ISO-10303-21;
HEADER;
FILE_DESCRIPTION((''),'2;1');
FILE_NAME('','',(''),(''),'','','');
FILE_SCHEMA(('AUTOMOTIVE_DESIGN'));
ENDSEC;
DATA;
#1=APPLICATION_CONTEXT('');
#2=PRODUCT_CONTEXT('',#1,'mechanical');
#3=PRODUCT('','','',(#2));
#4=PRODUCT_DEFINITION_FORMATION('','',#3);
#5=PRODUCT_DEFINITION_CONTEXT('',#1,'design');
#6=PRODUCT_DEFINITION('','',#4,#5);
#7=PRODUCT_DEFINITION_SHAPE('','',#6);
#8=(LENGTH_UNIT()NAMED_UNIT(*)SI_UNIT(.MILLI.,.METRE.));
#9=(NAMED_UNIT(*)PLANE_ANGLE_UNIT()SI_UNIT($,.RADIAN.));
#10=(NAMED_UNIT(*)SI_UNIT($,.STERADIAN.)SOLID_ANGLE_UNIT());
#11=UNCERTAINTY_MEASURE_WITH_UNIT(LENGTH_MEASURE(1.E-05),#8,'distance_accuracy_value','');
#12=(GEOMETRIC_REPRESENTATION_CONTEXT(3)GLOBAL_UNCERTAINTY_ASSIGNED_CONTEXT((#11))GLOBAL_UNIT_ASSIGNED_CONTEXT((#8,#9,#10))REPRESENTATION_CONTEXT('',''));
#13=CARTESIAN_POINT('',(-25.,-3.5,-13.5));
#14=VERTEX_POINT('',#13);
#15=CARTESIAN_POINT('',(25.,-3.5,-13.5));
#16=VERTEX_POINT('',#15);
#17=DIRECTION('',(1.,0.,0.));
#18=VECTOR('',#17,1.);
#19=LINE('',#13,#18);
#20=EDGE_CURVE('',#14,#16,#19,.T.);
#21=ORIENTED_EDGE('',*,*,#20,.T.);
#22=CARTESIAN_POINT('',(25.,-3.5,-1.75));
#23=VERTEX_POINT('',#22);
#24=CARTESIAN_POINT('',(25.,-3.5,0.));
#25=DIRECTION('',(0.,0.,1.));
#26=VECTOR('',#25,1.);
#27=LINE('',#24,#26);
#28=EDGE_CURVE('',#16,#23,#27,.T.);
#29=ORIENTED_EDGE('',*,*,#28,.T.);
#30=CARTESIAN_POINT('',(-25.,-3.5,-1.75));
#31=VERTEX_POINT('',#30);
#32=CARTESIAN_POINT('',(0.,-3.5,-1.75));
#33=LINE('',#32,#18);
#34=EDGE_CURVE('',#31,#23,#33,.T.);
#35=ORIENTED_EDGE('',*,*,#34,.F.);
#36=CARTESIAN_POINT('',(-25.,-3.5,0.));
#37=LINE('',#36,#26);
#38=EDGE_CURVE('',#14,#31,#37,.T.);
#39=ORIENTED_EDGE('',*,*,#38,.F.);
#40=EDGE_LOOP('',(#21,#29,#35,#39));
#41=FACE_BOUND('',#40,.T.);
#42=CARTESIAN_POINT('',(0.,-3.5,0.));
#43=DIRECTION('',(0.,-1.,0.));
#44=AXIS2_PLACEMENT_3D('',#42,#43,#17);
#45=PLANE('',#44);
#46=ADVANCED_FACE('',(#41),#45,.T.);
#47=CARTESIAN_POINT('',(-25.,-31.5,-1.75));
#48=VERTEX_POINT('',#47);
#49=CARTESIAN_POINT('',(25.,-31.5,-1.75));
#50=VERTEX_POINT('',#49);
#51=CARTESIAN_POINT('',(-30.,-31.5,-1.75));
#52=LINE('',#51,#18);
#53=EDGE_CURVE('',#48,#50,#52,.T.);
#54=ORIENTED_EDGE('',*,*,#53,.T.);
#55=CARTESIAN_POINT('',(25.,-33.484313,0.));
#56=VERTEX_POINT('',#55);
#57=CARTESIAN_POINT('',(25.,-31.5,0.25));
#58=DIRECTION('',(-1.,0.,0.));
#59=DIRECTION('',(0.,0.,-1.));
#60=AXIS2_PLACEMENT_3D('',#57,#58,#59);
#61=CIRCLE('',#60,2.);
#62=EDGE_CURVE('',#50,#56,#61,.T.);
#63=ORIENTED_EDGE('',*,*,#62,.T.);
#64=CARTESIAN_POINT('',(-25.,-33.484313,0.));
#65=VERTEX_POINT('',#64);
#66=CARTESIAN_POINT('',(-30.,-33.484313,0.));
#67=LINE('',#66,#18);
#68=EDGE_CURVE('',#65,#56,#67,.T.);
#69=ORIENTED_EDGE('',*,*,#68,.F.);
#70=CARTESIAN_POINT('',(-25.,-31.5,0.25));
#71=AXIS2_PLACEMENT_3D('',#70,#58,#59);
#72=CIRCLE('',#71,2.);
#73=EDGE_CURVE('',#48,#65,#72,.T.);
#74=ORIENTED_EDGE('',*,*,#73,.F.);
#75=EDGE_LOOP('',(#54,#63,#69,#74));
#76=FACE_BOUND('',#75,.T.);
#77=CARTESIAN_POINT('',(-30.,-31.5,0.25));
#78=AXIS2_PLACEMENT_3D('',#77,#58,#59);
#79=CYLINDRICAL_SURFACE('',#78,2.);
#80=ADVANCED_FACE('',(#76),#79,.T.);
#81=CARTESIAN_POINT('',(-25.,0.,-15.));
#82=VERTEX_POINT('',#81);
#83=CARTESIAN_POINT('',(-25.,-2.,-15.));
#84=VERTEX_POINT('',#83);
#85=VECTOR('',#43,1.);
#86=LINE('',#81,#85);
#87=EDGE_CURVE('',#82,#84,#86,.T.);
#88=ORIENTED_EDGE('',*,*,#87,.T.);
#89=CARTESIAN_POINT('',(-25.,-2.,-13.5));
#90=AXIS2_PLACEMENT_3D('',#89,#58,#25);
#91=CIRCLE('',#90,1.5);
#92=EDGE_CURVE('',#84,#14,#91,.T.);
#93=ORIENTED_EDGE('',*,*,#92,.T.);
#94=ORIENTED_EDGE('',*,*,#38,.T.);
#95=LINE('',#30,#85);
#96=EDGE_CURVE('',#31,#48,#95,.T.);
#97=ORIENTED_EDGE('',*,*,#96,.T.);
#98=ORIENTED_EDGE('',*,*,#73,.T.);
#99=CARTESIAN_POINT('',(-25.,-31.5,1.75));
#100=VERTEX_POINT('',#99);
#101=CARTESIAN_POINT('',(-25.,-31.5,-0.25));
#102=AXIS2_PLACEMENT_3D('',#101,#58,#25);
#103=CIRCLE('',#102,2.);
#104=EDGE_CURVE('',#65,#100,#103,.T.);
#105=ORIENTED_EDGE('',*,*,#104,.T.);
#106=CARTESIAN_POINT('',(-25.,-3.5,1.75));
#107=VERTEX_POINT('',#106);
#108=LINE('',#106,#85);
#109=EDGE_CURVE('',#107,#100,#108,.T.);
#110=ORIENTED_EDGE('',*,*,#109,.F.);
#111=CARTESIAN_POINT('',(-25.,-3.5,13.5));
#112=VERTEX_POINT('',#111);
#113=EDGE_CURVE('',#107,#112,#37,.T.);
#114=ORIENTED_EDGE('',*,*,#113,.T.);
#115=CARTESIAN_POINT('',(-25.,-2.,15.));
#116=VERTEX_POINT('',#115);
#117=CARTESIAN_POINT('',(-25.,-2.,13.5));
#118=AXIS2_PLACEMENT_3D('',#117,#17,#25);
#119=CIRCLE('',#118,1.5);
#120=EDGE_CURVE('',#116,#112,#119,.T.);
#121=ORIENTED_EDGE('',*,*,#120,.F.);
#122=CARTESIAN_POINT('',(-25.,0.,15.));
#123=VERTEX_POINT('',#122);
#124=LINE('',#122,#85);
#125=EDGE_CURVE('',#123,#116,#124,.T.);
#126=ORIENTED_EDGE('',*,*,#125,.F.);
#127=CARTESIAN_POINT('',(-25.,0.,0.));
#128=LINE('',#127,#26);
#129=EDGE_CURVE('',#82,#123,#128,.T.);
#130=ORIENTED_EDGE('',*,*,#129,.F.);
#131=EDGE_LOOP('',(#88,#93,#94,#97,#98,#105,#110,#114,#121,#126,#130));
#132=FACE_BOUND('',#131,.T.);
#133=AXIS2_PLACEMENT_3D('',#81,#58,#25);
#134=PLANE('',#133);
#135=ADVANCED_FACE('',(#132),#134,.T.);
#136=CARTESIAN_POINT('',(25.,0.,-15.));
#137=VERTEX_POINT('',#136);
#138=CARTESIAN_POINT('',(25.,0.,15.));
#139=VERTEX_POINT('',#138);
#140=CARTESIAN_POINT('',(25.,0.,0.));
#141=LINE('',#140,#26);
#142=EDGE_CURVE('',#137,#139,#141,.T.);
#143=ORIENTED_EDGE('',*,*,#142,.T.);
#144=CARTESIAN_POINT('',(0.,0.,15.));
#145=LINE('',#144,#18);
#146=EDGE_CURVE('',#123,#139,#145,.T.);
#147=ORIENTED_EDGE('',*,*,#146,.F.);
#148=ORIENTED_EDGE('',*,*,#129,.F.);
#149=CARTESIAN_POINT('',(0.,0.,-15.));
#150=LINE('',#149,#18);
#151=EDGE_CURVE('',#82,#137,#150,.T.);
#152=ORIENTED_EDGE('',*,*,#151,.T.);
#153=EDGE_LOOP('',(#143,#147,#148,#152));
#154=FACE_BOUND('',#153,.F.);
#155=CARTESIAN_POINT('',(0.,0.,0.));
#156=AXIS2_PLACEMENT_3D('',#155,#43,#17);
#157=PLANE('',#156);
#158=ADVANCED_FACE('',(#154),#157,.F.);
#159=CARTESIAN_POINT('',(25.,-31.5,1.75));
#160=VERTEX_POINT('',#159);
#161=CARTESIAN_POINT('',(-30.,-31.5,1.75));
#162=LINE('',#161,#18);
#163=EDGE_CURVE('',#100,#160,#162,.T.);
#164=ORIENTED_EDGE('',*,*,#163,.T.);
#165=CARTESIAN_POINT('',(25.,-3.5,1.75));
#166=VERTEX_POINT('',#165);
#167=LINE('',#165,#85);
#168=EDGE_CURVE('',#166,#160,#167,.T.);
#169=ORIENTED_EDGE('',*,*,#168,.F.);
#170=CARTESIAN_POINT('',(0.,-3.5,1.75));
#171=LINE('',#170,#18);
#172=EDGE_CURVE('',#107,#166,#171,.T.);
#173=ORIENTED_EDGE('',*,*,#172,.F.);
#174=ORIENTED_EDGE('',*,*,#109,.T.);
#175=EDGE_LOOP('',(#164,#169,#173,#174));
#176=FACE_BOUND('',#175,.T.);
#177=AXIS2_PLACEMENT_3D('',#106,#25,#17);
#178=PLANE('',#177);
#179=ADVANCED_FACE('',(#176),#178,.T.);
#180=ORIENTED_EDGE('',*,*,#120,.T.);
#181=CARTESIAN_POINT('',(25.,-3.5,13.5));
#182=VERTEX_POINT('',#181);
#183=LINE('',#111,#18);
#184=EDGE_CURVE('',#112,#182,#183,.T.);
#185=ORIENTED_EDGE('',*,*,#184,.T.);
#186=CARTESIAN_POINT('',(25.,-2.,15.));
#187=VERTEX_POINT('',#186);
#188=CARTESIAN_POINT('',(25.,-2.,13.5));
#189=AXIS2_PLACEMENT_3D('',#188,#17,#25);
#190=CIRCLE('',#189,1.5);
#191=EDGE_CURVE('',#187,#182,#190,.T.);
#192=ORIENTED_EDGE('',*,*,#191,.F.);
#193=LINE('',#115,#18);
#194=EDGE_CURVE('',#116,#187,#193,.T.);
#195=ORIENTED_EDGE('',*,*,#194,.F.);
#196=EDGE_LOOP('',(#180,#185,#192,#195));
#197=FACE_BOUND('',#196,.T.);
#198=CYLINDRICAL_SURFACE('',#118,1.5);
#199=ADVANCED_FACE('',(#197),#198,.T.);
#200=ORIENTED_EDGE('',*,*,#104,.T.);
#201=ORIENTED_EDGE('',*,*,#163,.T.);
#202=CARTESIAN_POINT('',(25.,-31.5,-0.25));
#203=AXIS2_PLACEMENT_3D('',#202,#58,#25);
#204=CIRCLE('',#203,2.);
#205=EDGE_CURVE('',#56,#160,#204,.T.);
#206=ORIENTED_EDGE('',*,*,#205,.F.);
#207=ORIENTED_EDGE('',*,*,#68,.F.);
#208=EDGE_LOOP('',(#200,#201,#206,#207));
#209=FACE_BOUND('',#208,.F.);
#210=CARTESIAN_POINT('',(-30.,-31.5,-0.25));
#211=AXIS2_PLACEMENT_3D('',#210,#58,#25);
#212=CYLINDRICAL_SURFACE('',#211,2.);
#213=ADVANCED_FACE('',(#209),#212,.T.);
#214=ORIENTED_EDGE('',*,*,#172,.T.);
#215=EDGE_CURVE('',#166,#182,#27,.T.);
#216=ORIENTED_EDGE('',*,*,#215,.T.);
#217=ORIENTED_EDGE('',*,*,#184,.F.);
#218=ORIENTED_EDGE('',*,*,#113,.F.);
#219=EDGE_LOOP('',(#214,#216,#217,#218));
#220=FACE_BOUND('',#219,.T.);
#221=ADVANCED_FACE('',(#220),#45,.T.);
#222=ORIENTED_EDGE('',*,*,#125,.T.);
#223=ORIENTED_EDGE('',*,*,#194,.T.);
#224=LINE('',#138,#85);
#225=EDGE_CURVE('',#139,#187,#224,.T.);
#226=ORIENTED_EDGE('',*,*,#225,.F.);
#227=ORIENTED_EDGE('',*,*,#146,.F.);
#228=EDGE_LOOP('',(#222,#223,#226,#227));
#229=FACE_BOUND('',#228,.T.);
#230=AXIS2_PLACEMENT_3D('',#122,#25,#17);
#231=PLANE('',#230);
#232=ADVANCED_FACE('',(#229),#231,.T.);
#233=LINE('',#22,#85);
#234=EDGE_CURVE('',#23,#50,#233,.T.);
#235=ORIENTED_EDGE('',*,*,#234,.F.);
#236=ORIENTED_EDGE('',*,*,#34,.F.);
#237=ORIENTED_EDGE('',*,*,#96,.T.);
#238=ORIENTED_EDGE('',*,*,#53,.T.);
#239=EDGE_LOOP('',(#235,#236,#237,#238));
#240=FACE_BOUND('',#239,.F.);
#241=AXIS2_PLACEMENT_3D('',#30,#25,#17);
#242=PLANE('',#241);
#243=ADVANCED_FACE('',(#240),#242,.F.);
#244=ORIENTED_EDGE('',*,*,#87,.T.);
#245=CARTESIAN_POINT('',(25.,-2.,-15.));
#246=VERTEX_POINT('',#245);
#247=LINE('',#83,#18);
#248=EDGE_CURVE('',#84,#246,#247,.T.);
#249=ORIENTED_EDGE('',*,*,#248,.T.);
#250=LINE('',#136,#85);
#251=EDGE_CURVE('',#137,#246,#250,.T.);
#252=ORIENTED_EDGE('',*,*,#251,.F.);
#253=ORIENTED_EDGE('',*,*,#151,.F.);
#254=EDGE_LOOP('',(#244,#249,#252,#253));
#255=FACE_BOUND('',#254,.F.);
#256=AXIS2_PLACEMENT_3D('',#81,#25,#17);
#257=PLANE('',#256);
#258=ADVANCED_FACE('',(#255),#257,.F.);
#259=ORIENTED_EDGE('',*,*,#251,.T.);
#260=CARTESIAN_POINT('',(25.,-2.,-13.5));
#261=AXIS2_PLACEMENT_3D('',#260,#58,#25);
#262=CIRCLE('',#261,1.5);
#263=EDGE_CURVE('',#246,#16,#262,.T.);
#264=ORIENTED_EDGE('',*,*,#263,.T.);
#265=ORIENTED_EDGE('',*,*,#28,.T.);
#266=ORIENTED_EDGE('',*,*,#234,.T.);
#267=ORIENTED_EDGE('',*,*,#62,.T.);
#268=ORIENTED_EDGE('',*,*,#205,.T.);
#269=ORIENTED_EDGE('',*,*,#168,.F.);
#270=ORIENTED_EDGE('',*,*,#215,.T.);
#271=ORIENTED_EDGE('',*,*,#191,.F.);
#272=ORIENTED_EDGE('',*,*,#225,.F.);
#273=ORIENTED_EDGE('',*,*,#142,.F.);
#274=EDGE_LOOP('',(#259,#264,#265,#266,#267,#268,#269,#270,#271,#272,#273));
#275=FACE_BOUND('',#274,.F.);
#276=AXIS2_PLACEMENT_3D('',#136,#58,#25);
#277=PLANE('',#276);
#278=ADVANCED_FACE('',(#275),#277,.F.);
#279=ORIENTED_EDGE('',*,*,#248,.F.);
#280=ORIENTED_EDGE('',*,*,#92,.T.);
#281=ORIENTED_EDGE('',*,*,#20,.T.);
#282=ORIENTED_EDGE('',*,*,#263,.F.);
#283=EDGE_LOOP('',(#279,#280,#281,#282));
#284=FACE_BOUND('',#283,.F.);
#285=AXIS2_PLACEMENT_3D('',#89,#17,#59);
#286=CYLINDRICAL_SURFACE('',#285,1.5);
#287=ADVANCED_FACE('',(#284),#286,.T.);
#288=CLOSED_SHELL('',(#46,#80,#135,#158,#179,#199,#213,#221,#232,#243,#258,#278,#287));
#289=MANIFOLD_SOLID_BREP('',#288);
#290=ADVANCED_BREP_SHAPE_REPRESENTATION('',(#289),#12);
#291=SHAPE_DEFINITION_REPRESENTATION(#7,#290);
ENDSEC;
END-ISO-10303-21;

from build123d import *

# Parameters (mm, degrees)
F0_W        = 50
F0_H        = 30
F1_DEPTH    = 3.5
F2_R        = 1.5
F3_W        = 50
F3_H        = 3.5
F4_DEPTH    = 30
F5_T1_DEPTH = 60


# Not quite as in the source:
# - a fillet or chamfer that OpenCascade refuses, or shapes differently, is made with other operations: its cross-section is extruded or revolved along the edge and cut away or added


with BuildPart() as f1:
    # F0 (on Front) → F1 (new body)
    with BuildSketch(Plane.XZ):
        Rectangle(F0_W, F0_H)
    extrude(amount=F1_DEPTH)

    # F2
    f2_edges = [f1.edges().sort_by_distance(p)[0] for p in [
        (0, -3.5, 15),
        (0, -3.5, -15),
    ]]
    fillet(f2_edges, radius=F2_R)

    # F3 (on face) → F4 (join)
    with BuildSketch(Plane.XZ.offset(3.5)):
        Rectangle(F3_W, F3_H)
    extrude(amount=F4_DEPTH)

    # F5: fillet of radius 2 on 2 edges, made by hand

    # F5_s2 → F5_t1 (cut)
    with BuildSketch(Plane.YZ.offset(-30)):
        with BuildLine():
            ThreePointArc((-31.5, -1.75), (-32.9142135624, -1.1642135624), (-33.5, 0.25))
            Line((-33.5, 0.25), (-33.5, -1.75))
            Line((-33.5, -1.75), (-31.5, -1.75))
        make_face()
        with BuildLine():
            ThreePointArc((-31.5, 1.75), (-32.9142135624, 1.1642135624), (-33.5, -0.25))
            Line((-33.5, -0.25), (-33.5, 1.75))
            Line((-33.5, 1.75), (-31.5, 1.75))
        make_face()
    extrude(amount=F5_T1_DEPTH, mode=Mode.SUBTRACT)


solid = f1.part
